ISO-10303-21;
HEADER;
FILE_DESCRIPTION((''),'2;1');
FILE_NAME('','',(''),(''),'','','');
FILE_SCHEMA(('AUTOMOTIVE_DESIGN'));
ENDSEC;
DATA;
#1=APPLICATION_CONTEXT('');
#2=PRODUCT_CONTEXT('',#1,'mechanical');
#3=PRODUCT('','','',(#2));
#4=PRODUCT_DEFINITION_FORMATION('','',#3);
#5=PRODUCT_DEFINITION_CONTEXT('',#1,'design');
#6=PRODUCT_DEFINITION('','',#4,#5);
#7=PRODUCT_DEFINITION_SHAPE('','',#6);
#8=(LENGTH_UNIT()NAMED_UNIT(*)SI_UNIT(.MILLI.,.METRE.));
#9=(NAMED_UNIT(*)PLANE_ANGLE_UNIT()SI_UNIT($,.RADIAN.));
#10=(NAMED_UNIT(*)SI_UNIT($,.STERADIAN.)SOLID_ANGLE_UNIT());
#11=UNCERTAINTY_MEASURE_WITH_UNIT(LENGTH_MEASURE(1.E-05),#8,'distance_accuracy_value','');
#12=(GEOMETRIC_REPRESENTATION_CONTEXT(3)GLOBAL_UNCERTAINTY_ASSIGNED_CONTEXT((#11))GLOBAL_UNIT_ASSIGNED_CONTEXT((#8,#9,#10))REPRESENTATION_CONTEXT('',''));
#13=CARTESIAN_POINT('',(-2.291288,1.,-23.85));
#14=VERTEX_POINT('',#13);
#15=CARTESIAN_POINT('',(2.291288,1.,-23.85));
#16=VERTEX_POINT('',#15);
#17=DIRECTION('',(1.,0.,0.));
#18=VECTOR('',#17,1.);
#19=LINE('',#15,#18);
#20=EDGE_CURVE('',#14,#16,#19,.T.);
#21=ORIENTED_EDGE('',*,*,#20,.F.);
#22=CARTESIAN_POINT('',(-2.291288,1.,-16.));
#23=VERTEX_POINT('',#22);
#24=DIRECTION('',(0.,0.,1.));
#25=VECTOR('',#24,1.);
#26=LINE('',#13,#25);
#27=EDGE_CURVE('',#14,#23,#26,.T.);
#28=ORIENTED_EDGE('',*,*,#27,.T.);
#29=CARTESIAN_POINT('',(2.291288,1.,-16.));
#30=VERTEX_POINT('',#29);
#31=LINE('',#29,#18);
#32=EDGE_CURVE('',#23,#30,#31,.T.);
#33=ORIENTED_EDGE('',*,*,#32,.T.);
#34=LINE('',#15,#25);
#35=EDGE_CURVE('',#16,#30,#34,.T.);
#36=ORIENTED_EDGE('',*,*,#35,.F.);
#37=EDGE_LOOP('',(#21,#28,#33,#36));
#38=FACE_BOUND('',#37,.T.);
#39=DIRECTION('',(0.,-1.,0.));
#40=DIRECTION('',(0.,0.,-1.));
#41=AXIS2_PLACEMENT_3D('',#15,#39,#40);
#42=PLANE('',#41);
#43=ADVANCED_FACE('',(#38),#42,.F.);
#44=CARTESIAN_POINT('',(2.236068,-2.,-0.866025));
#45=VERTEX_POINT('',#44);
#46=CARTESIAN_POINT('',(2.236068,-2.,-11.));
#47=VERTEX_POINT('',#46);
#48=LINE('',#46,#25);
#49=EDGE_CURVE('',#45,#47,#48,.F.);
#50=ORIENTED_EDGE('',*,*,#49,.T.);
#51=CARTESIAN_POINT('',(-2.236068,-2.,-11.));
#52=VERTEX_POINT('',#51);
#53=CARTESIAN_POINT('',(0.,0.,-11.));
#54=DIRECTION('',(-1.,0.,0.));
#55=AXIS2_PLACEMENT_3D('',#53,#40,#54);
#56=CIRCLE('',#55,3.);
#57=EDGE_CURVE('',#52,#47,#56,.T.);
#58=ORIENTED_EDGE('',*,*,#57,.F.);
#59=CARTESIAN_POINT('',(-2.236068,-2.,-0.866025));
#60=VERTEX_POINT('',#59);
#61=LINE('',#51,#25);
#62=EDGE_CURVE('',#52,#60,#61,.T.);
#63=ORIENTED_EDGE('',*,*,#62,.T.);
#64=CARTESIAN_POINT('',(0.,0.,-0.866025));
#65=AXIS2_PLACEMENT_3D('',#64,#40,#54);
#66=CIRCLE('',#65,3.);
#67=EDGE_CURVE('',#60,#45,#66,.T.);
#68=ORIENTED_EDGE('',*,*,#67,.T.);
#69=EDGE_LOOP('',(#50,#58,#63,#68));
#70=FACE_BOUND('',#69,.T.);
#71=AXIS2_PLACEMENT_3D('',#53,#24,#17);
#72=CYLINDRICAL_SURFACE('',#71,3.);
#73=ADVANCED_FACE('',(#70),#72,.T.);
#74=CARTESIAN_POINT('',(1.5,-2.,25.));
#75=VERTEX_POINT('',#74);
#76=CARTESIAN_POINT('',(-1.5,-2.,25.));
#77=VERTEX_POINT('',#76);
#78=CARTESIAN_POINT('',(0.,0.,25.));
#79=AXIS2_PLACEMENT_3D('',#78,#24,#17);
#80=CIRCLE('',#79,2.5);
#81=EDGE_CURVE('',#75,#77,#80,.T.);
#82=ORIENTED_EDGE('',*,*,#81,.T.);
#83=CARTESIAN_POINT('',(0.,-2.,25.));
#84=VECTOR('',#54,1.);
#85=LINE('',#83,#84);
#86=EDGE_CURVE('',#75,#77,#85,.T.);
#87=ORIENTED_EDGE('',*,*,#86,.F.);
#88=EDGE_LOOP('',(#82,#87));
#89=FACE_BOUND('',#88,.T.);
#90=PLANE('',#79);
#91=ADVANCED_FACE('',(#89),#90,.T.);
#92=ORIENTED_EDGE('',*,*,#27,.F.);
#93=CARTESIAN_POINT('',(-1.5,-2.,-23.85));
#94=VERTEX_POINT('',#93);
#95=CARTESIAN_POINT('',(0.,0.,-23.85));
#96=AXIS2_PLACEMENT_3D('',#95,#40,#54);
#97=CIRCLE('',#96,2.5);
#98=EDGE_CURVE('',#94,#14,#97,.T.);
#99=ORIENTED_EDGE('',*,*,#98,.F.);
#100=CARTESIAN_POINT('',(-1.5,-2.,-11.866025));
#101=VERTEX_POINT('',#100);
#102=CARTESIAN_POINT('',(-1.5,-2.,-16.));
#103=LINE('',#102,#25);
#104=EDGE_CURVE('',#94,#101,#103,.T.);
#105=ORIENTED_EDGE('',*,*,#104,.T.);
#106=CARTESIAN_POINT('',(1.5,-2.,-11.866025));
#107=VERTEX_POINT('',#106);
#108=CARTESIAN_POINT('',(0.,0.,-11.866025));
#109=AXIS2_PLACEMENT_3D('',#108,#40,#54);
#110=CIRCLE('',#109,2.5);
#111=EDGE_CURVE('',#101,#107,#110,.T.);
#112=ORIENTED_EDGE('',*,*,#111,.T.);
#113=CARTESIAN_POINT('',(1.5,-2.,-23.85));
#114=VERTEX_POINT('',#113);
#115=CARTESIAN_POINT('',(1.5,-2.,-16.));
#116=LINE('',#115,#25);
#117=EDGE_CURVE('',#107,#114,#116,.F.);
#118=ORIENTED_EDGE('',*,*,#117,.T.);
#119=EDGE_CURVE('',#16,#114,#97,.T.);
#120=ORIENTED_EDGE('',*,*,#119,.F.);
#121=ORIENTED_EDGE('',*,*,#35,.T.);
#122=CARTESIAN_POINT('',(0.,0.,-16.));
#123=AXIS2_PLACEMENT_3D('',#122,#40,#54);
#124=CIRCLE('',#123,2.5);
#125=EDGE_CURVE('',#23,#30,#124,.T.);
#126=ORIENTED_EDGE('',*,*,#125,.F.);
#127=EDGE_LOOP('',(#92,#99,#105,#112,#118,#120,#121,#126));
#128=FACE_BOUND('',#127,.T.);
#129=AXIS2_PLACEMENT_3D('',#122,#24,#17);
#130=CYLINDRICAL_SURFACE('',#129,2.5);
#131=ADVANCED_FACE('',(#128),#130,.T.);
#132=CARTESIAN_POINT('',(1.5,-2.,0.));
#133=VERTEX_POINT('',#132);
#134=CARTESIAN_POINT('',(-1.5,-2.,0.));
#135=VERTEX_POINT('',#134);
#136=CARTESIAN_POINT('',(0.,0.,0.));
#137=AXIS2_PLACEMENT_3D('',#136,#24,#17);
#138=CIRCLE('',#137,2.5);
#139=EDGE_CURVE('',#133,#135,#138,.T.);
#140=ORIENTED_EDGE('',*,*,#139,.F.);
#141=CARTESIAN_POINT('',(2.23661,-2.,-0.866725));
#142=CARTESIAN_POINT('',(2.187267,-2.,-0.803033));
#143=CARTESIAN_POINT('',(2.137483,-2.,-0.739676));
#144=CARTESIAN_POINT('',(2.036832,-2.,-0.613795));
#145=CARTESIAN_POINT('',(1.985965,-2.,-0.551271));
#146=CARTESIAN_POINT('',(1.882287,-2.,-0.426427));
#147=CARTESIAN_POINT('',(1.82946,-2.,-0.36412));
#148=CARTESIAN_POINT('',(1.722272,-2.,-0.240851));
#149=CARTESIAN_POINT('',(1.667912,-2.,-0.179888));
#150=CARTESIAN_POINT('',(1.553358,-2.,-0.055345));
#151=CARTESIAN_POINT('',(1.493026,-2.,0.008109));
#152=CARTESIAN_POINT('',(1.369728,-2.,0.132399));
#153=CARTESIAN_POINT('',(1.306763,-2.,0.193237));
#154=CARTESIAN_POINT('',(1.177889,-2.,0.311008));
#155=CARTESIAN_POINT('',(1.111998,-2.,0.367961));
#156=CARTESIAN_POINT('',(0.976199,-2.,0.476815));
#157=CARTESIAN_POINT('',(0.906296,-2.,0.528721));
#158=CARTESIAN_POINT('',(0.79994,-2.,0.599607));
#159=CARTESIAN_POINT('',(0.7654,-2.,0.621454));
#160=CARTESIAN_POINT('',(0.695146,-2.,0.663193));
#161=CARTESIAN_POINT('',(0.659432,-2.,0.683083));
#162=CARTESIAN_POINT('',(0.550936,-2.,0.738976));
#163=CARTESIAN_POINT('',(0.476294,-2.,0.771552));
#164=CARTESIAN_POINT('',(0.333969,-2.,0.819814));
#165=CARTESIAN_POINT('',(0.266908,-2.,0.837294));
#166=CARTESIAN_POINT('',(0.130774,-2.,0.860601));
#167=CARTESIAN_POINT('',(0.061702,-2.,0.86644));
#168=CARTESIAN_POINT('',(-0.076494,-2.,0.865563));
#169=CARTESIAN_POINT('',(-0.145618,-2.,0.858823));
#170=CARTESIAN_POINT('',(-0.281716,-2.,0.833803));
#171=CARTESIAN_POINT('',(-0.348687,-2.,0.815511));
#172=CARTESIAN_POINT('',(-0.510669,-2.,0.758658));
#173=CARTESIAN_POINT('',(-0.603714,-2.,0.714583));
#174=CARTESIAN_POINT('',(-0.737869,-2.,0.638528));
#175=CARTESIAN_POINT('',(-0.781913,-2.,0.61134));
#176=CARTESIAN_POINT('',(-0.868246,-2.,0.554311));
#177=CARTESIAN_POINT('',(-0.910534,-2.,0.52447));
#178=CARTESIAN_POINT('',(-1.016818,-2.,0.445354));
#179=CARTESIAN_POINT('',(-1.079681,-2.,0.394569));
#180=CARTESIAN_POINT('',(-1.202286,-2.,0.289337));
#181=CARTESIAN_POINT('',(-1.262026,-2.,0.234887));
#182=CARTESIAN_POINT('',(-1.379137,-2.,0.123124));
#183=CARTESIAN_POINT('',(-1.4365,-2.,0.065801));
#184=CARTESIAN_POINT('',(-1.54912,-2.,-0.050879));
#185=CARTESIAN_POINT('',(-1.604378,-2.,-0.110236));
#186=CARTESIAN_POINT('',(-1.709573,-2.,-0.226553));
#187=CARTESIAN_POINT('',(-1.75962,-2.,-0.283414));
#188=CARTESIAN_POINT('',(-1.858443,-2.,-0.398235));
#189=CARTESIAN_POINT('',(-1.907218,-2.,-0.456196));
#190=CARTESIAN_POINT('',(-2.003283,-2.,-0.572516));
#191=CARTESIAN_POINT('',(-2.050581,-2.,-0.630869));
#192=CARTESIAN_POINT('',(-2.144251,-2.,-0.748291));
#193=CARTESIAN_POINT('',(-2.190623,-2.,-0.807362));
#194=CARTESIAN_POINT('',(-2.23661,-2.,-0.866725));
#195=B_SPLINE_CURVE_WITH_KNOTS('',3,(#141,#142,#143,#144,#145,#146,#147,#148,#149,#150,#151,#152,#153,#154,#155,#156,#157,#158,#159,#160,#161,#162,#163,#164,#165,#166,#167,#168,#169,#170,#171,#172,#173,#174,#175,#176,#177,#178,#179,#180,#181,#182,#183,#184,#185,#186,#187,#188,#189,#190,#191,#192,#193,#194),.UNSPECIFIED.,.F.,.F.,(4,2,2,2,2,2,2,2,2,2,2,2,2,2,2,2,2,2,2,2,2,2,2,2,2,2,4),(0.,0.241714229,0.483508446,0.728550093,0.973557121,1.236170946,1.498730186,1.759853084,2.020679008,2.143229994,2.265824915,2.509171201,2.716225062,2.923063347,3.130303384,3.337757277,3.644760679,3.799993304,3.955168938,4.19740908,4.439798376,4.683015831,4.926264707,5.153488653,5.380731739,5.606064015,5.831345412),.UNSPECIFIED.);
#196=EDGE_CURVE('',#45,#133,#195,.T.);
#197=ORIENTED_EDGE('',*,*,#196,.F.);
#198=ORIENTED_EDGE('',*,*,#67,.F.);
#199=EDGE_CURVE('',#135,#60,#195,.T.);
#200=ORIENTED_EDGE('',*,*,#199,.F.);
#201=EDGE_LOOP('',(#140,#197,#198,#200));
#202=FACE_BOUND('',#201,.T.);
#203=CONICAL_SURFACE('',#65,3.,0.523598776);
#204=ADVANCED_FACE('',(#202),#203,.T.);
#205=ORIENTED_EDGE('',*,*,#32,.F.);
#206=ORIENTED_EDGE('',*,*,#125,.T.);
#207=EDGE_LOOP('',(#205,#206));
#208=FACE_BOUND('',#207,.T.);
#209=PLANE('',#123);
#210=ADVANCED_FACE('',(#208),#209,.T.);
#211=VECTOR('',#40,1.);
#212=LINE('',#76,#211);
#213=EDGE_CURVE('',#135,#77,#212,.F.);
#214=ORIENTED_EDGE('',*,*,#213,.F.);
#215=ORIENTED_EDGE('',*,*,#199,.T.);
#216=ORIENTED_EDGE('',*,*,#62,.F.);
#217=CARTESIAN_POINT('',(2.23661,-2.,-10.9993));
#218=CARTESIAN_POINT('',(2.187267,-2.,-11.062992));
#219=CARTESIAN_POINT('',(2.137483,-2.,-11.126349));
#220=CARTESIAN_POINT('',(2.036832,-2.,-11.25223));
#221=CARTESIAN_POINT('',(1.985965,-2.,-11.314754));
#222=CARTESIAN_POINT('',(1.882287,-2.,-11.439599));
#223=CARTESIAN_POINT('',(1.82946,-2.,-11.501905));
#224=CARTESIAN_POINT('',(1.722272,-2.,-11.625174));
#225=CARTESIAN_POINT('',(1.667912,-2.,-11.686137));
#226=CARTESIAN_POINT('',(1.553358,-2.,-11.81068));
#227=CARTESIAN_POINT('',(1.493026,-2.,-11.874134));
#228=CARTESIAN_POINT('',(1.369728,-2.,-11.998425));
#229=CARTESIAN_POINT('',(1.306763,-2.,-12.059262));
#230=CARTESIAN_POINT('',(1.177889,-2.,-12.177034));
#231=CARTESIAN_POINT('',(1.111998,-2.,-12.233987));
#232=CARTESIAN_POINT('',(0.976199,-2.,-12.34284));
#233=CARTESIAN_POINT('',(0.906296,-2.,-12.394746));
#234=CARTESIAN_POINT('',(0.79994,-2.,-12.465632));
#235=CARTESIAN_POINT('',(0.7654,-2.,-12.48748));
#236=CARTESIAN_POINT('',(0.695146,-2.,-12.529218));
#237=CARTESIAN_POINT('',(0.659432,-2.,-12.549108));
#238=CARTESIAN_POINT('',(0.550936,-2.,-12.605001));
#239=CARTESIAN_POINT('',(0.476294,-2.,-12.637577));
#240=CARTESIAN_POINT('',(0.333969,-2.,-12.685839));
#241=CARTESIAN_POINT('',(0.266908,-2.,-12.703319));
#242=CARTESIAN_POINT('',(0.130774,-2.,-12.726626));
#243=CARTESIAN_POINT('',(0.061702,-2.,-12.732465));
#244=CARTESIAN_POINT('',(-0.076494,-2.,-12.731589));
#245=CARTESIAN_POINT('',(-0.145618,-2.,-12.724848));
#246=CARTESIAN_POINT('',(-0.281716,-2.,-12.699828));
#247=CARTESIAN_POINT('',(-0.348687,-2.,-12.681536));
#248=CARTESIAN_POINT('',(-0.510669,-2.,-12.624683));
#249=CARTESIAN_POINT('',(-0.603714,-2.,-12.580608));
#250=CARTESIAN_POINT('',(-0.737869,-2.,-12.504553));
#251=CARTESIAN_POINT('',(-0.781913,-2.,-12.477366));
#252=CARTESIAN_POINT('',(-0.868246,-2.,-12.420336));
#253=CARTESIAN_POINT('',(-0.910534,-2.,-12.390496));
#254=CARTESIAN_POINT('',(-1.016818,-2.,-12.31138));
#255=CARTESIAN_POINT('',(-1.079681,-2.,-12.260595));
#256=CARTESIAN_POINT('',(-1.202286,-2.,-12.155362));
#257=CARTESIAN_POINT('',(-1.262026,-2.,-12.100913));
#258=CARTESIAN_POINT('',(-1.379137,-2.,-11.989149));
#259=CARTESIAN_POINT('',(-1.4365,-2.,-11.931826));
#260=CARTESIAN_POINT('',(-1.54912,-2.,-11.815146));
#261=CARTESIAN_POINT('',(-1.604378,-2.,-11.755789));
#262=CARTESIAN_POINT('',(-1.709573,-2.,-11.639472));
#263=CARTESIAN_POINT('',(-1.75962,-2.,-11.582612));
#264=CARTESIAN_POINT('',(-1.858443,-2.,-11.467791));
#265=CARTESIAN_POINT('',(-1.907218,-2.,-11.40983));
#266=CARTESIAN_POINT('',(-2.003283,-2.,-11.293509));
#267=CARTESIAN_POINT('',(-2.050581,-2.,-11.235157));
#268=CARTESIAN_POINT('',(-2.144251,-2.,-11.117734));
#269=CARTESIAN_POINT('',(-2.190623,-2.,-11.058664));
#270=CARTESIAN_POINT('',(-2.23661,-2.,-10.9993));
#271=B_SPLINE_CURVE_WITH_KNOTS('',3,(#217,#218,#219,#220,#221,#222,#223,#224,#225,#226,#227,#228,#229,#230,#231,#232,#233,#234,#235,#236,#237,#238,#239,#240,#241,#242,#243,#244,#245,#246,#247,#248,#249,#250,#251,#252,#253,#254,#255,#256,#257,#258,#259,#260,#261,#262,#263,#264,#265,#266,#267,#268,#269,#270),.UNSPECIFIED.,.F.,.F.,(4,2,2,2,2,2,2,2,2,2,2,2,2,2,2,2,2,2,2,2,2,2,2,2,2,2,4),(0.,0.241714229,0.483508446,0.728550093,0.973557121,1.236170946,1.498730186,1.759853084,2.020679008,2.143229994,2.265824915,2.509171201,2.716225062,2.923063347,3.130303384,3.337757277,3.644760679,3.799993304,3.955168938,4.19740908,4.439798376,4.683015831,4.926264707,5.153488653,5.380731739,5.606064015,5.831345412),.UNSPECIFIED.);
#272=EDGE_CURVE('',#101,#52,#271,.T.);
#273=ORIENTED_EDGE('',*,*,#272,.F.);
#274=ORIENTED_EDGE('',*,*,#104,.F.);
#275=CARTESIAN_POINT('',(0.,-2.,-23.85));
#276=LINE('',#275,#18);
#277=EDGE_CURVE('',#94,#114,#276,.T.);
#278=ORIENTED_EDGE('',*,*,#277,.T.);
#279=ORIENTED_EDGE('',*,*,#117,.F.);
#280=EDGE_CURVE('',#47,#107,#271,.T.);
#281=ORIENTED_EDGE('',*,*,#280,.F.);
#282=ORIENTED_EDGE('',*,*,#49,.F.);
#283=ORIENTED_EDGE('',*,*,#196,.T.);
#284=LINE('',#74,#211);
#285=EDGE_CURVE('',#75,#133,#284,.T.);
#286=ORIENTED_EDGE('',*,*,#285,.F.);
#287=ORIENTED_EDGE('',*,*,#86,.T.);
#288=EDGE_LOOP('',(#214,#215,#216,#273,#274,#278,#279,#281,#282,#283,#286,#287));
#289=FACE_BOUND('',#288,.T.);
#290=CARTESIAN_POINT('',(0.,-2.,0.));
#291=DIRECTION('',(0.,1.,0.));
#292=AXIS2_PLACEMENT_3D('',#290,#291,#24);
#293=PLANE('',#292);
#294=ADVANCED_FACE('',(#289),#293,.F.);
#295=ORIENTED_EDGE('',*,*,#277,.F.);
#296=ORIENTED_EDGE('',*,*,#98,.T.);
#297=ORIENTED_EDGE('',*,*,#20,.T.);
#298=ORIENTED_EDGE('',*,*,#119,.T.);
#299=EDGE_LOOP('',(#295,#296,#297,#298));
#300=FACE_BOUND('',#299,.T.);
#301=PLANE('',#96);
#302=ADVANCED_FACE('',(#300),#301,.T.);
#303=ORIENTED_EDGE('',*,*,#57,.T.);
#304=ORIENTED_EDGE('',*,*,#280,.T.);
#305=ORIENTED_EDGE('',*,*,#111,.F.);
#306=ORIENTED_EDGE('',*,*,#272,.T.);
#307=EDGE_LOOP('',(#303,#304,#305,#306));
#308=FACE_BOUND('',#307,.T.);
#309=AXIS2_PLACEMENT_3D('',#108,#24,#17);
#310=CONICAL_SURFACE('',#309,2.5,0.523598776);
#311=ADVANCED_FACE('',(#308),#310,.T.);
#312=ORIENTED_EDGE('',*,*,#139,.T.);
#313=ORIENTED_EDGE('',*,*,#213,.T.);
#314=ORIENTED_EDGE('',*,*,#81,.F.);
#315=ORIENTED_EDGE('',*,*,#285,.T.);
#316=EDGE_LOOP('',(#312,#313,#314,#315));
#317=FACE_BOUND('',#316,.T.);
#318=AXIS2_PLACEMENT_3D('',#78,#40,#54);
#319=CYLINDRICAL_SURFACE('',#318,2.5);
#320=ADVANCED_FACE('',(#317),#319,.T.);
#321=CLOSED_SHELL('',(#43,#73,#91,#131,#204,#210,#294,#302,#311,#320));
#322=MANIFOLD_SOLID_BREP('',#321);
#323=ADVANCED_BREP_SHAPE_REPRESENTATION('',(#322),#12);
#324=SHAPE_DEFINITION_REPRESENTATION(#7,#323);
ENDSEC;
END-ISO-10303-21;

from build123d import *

# Parameters (mm, degrees)
SKETCH1_R           = 2.5
BOSS_EXTRUDE1_DEPTH = 25
SKETCH2_R           = 3
BOSS_EXTRUDE2_DEPTH = 11
CHAMFER1_SIZE2      = 0.5
CHAMFER1_SIZE       = 0.866025404
BOSS_EXTRUDE3_START = 5
SKETCH3_R           = 2.5
BOSS_EXTRUDE3_DEPTH = 5
CHAMFER3_SIZE2      = 0.866025404
CHAMFER3_SIZE       = 0.5
BOSS_EXTRUDE4_START = 7.85
BOSS_EXTRUDE4_DEPTH = 7.85


with BuildPart() as part:
    # Sketch1 → Boss-Extrude1 (new body)
    with BuildSketch(Plane.XY):
        Circle(SKETCH1_R)
    extrude(amount=BOSS_EXTRUDE1_DEPTH)

    # Sketch2 → Boss-Extrude2 (add)
    with BuildSketch(Plane(origin=(0, 0, 0), x_dir=(-1, 0, 0), z_dir=(0, 0, -1))):
        Circle(SKETCH2_R)
    extrude(amount=BOSS_EXTRUDE2_DEPTH)

    # Chamfer1
    chamfer1_edges = [part.edges().sort_by_distance(p)[0] for p in [
        (3, 0, 0),
    ]]
    chamfer1_side = [part.faces().sort_by_distance(p)[0] for p in [
        (3, 0, -0.01),
    ]]
    chamfer(chamfer1_edges, length=CHAMFER1_SIZE - 0.0001, length2=CHAMFER1_SIZE2 - 0.0001, reference=chamfer1_side[0])  # a hair under: the kernel refuses the full size

    # Sketch3 → Boss-Extrude3 (add)
    with BuildSketch(Plane(origin=(0, 0, -11), x_dir=(-1, 0, 0), z_dir=(0, 0, -1)).offset(BOSS_EXTRUDE3_START)):
        with Locations(Location((0, 0, 0), (0, 0, 180))):
            Circle(SKETCH3_R)
    extrude(amount=-BOSS_EXTRUDE3_DEPTH)

    # Chamfer3
    chamfer3_edges = [part.edges().sort_by_distance(p)[0] for p in [
        (-2.5, 0, -11),
    ]]
    chamfer3_side = [part.faces().sort_by_distance(p)[0] for p in [
        (-2.51, 0, -11),
    ]]
    chamfer(chamfer3_edges, length=CHAMFER3_SIZE - 0.0001, length2=CHAMFER3_SIZE2 - 0.0001, reference=chamfer3_side[0])  # a hair under: the kernel refuses the full size

    # Sketch4 → Boss-Extrude4 (add)
    with BuildSketch(Plane(origin=(0, 0, -16), x_dir=(-1, 0, 0), z_dir=(0, 0, -1)).offset(BOSS_EXTRUDE4_START)):
        with BuildLine():
            Line((-2.291287847, 1), (2.291287847, 1))
            ThreePointArc((2.291287847, 1), (0, -2.5), (-2.291287847, 1))
        make_face()
    extrude(amount=-BOSS_EXTRUDE4_DEPTH)

    # SurfaceCut1
    split(bisect_by=Plane(origin=(0, -2, 0), x_dir=(1, 0, 0), z_dir=(0, 1, 0)), keep=Keep.TOP)


solid = part.part
